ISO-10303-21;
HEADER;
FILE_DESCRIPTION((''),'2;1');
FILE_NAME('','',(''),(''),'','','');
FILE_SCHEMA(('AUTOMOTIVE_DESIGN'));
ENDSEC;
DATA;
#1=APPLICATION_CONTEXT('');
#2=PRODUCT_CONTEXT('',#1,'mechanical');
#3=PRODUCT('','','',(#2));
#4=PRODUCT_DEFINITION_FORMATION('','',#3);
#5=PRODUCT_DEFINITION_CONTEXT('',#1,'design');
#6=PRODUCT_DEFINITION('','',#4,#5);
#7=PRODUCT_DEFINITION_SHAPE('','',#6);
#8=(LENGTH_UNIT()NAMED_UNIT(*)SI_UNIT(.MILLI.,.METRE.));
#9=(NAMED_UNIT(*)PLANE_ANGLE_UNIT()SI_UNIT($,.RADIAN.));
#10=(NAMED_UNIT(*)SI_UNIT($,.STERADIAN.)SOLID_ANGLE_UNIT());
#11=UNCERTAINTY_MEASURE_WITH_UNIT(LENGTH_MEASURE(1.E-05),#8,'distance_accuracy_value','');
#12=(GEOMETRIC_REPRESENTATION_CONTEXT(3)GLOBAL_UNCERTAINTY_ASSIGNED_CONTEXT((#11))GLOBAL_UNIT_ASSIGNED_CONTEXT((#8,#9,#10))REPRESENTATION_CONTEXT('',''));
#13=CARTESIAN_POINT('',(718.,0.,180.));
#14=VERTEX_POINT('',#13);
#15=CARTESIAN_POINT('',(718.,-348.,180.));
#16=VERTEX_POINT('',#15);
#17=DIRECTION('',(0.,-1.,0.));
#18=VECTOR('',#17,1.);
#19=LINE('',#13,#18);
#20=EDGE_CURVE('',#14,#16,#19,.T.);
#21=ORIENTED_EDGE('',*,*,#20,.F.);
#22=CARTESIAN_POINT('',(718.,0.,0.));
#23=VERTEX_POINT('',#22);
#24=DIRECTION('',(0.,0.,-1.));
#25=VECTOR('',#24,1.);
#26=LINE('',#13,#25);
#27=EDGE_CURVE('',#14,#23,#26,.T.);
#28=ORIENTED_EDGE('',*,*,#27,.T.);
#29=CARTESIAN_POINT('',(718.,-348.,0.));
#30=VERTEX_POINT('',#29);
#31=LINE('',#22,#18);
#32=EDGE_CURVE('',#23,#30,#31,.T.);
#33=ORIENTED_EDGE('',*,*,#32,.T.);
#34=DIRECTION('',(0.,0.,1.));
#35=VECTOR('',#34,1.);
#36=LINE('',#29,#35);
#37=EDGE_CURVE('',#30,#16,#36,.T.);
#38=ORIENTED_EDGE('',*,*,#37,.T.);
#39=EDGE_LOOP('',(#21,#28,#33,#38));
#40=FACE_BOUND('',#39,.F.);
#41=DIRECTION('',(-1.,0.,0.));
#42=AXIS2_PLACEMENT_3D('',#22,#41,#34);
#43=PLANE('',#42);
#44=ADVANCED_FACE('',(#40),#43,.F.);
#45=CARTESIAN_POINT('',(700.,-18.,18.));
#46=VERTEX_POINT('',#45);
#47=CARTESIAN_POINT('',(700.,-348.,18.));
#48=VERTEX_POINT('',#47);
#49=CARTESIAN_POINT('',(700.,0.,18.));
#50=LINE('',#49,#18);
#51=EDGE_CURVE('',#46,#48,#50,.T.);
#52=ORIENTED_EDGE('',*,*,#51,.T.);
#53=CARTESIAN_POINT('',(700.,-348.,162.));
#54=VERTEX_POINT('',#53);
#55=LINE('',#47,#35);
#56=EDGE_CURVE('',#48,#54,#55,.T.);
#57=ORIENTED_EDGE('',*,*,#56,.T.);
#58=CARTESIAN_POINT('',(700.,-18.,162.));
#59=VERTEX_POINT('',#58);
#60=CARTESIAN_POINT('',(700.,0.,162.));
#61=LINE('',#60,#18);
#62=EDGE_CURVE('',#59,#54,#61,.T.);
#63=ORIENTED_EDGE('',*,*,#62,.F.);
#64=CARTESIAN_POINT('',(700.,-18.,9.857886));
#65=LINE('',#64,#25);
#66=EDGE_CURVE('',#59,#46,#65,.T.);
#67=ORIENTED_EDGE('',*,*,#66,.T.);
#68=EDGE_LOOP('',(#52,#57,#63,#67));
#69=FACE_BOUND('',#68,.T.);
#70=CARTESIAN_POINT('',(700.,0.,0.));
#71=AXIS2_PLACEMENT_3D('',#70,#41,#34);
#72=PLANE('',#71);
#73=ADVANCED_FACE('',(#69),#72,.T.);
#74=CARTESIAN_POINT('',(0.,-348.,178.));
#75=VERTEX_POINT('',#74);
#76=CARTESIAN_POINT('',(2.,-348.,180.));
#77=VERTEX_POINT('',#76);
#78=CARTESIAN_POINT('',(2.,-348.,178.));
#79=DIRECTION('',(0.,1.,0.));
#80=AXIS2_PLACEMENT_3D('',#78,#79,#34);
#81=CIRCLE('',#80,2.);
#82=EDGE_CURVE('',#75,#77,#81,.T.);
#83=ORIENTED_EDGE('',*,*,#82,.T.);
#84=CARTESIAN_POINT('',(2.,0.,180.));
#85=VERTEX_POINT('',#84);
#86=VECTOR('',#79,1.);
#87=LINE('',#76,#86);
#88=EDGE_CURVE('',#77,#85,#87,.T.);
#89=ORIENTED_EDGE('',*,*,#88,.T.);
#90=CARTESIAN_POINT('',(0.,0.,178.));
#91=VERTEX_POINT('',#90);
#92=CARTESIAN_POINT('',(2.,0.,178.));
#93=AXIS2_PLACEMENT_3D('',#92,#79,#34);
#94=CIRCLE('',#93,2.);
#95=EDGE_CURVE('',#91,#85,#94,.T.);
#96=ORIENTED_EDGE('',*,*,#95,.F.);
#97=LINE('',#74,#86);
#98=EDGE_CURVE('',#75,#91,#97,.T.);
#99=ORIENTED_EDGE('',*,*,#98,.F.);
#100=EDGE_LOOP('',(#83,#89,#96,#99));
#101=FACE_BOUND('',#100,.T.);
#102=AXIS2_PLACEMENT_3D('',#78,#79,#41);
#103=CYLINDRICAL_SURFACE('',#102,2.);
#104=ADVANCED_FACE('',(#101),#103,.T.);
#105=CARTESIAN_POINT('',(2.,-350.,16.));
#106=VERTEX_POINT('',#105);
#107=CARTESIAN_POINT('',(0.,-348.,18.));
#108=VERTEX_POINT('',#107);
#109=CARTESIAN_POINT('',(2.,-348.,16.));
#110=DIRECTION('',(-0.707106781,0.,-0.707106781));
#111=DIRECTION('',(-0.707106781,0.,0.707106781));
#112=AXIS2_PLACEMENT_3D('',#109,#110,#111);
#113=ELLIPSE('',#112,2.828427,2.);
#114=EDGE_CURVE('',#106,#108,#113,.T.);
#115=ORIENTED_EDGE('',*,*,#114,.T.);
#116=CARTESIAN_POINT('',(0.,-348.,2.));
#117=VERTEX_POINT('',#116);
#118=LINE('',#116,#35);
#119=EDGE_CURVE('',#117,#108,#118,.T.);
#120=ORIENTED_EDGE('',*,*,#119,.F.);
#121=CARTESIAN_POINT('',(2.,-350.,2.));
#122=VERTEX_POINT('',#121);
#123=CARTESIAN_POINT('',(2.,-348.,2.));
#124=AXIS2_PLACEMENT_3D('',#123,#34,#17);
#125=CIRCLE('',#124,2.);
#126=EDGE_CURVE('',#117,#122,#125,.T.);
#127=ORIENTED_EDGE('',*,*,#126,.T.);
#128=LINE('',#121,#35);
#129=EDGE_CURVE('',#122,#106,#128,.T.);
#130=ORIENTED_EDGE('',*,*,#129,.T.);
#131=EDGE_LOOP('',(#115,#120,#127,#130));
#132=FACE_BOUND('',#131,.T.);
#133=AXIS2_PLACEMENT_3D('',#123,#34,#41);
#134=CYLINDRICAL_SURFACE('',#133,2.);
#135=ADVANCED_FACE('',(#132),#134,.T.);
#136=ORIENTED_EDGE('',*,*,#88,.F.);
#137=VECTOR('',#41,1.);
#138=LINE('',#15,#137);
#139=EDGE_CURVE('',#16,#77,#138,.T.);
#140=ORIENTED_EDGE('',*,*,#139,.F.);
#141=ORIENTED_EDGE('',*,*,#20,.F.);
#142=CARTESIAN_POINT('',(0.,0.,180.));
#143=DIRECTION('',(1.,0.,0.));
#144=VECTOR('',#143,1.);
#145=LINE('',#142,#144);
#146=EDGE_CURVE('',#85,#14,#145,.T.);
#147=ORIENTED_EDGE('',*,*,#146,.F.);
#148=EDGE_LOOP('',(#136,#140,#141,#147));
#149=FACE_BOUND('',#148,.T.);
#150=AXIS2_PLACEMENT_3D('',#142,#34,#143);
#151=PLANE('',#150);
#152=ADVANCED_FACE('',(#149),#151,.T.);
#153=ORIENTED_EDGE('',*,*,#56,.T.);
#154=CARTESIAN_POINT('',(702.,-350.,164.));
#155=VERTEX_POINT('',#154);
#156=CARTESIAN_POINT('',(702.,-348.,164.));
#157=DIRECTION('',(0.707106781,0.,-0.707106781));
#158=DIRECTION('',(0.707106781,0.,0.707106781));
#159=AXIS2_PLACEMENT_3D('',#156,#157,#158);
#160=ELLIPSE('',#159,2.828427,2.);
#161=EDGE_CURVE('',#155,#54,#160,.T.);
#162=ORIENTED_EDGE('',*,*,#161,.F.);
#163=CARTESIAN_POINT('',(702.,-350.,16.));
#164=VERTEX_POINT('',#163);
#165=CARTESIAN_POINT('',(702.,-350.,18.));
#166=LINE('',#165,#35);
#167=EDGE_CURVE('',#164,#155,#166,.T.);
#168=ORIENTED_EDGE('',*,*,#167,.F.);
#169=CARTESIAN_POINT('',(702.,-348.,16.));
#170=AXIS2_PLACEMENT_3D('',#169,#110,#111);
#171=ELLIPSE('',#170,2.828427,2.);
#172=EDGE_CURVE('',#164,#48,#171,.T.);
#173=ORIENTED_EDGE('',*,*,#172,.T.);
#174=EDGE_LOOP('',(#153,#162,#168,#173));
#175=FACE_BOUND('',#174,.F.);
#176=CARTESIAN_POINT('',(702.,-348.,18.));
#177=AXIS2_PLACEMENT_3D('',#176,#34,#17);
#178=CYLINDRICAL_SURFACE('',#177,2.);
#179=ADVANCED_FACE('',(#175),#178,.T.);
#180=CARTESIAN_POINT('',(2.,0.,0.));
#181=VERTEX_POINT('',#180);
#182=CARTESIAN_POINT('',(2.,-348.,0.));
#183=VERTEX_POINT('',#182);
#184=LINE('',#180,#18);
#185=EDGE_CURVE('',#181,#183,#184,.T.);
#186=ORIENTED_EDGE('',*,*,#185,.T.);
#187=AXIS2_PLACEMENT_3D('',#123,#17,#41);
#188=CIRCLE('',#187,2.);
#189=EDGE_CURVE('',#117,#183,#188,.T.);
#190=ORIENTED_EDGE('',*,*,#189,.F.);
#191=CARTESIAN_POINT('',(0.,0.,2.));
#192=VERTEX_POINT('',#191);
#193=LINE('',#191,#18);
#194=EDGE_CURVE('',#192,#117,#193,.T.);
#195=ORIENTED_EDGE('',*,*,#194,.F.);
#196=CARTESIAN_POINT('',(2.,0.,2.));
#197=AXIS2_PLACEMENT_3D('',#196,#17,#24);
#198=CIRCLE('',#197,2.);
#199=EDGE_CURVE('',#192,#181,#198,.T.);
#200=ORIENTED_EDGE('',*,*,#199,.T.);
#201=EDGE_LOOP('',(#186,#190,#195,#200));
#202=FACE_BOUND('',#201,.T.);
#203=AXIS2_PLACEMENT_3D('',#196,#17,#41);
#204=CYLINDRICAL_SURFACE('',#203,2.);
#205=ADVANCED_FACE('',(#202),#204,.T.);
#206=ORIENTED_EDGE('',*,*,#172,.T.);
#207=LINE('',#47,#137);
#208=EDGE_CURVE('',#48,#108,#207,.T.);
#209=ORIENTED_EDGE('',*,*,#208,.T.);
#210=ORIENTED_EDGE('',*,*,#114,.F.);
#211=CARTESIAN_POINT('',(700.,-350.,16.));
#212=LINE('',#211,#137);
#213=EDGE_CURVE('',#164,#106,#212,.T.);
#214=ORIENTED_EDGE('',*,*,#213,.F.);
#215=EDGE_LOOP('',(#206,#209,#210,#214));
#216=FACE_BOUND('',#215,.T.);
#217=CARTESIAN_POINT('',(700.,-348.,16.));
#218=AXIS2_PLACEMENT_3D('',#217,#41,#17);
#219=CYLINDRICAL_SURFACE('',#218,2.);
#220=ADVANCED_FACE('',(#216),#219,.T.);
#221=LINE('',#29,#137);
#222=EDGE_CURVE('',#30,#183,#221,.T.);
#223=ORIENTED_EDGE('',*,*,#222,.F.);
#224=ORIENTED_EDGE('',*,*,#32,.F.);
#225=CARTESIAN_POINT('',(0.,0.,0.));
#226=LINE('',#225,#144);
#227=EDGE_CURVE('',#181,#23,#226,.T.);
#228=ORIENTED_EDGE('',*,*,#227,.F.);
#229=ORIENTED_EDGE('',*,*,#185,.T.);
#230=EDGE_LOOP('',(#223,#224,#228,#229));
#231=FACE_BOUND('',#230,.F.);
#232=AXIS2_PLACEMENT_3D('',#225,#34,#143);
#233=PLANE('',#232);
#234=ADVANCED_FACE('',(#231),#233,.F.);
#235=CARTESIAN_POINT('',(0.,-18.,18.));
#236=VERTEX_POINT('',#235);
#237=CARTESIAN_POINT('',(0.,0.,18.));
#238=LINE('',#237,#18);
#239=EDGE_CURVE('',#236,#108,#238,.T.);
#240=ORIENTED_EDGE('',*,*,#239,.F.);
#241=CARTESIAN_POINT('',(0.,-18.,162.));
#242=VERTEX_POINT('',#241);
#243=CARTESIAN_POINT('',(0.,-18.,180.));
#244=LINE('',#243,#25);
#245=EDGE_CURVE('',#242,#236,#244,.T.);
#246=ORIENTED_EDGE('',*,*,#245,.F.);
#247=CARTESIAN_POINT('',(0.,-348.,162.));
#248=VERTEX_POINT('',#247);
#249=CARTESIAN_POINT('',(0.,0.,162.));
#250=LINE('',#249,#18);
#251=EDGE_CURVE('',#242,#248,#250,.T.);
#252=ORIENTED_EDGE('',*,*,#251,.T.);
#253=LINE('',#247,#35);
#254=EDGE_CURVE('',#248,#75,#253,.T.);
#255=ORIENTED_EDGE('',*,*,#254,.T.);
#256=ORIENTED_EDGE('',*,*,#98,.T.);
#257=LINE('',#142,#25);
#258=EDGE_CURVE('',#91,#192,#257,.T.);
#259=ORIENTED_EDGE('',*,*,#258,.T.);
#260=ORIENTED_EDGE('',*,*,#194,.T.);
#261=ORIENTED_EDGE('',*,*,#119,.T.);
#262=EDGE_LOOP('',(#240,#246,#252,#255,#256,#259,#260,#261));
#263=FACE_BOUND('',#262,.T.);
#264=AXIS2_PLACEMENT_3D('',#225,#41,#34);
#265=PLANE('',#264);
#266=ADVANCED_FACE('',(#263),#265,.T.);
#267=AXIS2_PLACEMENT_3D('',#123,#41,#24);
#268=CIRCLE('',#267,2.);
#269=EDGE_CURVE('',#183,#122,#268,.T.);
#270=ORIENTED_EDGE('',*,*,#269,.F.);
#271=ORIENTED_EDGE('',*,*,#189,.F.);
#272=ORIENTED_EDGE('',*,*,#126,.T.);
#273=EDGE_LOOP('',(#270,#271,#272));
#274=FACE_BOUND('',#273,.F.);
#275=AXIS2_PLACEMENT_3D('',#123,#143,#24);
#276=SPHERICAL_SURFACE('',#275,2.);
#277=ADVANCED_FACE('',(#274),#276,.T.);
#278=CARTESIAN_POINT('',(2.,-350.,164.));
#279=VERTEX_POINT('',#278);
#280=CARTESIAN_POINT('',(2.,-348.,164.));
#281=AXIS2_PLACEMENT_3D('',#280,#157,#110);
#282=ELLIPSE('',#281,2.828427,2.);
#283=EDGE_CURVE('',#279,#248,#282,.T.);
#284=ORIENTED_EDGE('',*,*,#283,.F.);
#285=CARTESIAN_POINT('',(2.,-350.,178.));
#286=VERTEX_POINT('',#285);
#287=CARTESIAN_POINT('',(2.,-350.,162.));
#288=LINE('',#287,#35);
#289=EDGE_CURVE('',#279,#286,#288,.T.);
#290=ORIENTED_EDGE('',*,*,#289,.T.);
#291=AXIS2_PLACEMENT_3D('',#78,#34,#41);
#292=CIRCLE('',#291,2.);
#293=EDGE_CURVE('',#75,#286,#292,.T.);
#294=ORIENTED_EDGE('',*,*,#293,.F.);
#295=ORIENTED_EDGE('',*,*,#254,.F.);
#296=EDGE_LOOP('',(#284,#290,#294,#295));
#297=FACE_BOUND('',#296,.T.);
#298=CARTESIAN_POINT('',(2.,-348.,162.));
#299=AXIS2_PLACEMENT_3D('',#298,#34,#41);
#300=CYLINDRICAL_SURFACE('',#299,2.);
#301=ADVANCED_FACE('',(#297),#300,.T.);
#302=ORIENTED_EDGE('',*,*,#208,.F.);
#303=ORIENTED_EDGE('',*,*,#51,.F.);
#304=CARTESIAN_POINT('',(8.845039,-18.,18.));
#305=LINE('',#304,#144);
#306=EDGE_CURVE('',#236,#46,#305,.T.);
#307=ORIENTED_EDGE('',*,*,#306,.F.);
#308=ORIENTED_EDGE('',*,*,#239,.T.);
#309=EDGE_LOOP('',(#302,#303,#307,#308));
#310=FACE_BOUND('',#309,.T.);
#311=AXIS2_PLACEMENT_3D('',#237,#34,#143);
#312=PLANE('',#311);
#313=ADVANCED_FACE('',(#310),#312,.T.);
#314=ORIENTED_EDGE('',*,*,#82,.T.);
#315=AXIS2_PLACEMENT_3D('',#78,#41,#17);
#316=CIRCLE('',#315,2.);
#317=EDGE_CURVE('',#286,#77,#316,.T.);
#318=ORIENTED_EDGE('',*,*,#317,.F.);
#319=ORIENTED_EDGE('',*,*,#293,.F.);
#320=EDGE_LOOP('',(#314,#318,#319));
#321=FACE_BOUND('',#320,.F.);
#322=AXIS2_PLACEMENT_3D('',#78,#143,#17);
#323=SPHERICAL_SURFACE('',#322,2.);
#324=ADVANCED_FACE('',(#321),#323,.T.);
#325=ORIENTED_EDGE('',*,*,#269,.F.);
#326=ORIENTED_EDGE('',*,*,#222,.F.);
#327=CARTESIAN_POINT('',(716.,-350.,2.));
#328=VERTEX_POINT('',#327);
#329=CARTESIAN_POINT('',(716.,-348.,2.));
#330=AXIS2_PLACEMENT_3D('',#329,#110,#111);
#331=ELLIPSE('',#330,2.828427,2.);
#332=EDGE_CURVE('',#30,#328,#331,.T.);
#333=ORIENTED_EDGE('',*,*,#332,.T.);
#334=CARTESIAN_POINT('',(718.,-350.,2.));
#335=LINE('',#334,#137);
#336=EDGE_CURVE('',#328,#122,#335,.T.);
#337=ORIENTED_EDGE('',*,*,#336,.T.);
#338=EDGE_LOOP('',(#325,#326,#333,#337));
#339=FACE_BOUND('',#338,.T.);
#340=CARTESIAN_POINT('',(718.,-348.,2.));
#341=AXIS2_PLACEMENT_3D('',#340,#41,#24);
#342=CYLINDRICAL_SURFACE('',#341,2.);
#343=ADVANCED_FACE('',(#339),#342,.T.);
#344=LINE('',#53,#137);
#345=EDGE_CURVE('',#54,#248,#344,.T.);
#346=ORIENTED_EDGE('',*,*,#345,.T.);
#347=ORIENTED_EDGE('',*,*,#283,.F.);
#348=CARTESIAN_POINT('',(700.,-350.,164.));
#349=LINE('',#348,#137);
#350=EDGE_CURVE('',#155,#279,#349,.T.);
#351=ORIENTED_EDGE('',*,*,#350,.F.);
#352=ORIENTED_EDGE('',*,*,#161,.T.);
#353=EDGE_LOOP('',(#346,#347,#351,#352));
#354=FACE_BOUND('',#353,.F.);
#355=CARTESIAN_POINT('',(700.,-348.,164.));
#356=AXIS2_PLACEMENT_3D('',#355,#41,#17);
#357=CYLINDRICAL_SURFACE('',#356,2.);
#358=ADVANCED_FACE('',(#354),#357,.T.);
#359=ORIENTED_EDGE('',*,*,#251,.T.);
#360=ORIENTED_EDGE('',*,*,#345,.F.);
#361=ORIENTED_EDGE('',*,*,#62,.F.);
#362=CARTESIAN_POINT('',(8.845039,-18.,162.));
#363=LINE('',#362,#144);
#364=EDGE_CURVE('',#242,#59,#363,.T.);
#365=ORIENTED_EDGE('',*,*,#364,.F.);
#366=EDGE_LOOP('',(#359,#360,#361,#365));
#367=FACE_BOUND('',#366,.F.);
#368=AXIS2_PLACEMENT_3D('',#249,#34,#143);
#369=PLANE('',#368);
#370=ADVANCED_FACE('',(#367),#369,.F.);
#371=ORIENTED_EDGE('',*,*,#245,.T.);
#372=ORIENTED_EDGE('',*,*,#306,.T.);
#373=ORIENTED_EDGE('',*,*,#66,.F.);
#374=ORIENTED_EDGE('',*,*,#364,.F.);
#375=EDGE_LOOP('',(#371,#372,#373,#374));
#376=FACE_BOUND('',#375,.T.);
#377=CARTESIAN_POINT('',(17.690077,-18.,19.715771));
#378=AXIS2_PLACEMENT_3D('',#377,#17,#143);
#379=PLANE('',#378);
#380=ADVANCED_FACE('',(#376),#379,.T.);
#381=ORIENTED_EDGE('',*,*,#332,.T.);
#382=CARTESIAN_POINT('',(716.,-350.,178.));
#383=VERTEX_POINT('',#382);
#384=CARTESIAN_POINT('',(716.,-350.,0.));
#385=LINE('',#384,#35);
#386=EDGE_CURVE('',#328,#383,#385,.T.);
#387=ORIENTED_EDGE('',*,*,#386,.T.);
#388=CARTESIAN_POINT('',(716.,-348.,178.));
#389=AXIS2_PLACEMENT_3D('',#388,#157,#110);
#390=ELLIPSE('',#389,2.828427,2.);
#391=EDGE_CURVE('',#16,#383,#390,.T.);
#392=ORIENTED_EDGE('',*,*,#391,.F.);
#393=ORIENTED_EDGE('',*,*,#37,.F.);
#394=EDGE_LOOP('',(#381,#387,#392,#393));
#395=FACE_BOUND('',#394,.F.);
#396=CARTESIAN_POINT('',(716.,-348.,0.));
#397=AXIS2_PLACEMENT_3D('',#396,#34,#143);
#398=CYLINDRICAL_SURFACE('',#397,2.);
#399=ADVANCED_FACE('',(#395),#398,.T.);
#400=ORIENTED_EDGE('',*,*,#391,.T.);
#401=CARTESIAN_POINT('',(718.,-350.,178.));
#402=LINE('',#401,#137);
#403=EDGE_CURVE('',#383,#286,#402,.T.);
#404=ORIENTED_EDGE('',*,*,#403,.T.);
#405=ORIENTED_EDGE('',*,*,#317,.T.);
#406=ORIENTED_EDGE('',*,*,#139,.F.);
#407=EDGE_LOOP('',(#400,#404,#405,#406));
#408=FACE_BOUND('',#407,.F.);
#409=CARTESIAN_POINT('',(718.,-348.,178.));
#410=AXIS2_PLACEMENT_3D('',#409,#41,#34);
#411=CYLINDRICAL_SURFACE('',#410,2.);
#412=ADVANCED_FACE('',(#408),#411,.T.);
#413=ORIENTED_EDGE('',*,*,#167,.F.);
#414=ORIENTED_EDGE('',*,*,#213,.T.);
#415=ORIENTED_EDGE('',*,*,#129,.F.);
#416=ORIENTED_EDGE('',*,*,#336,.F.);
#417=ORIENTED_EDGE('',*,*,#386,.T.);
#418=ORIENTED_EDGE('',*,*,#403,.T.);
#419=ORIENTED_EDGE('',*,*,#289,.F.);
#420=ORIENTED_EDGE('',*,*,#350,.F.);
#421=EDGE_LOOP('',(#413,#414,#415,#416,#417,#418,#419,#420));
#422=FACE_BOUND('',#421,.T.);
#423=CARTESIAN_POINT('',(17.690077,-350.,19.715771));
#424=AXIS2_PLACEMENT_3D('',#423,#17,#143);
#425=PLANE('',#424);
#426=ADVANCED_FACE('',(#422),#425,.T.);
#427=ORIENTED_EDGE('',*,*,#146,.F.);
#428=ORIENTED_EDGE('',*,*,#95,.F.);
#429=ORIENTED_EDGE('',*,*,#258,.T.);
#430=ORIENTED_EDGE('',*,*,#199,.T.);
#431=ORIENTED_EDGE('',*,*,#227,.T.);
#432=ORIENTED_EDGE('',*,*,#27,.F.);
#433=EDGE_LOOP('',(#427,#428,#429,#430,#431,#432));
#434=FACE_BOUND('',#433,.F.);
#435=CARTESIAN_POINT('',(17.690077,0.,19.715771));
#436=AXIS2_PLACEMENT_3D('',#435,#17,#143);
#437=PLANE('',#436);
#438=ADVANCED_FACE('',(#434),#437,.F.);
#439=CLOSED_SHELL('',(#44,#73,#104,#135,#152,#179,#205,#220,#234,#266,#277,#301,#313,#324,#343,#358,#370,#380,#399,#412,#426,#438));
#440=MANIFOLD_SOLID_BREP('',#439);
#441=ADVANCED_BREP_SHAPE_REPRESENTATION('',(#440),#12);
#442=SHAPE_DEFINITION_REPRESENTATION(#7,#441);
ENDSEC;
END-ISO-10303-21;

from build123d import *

# Parameters (mm, degrees)
F0_W     = 35.3801548481
F0_H     = 39.4315421581
F1_DEPTH = 350
F2_DEPTH = 718
F3_DEPTH = 180
F4_T     = -18
F5_R     = 2
F6_R     = 2


with BuildPart() as f1:
    # F0 (on Front) → F1 (new body)
    with BuildSketch(Plane.XZ):
        with Locations((17.690077424, 19.7157710791)):
            Rectangle(F0_W, F0_H)
    extrude(amount=F1_DEPTH)

    # F2 (add): a face of the model
    f2_faces = [f1.faces().sort_by_distance(p)[0] for p in [
        (0, -175, 19.7157710791),
    ]]
    extrude(f2_faces, amount=-F2_DEPTH)

    # F3 (add): a face of the model
    f3_faces = [f1.faces().sort_by_distance(p)[0] for p in [
        (359, -175, 0),
    ]]
    extrude(f3_faces, amount=-F3_DEPTH)

    # F4
    f4_openings = [f1.faces().sort_by_distance(p)[0] for p in [
        (359, -350, 90),
        (0, -175, 90),
    ]]
    offset(amount=F4_T, openings=f4_openings)

    # F5
    f5_edges = [f1.edges().sort_by_distance(p)[0] for p in [
        (359, -350, 180),
        (718, -350, 90),
        (359, -350, 0),
    ]]
    fillet(f5_edges, radius=F5_R)

    # F6
    f6_edges = [f1.edges().sort_by_distance(p)[0] for p in [
        (700, -350, 90),
        (350, -350, 162),
        (350, -350, 18),
        (0, -350, 170),
        (0, -350, 10),
        (0, -174, 0),
        (0, -174, 180),
        (0, -349.414214, 0.585786),
        (0, -349.414214, 179.414214),
    ]]
    fillet(f6_edges, radius=F6_R)


solid = f1.part
